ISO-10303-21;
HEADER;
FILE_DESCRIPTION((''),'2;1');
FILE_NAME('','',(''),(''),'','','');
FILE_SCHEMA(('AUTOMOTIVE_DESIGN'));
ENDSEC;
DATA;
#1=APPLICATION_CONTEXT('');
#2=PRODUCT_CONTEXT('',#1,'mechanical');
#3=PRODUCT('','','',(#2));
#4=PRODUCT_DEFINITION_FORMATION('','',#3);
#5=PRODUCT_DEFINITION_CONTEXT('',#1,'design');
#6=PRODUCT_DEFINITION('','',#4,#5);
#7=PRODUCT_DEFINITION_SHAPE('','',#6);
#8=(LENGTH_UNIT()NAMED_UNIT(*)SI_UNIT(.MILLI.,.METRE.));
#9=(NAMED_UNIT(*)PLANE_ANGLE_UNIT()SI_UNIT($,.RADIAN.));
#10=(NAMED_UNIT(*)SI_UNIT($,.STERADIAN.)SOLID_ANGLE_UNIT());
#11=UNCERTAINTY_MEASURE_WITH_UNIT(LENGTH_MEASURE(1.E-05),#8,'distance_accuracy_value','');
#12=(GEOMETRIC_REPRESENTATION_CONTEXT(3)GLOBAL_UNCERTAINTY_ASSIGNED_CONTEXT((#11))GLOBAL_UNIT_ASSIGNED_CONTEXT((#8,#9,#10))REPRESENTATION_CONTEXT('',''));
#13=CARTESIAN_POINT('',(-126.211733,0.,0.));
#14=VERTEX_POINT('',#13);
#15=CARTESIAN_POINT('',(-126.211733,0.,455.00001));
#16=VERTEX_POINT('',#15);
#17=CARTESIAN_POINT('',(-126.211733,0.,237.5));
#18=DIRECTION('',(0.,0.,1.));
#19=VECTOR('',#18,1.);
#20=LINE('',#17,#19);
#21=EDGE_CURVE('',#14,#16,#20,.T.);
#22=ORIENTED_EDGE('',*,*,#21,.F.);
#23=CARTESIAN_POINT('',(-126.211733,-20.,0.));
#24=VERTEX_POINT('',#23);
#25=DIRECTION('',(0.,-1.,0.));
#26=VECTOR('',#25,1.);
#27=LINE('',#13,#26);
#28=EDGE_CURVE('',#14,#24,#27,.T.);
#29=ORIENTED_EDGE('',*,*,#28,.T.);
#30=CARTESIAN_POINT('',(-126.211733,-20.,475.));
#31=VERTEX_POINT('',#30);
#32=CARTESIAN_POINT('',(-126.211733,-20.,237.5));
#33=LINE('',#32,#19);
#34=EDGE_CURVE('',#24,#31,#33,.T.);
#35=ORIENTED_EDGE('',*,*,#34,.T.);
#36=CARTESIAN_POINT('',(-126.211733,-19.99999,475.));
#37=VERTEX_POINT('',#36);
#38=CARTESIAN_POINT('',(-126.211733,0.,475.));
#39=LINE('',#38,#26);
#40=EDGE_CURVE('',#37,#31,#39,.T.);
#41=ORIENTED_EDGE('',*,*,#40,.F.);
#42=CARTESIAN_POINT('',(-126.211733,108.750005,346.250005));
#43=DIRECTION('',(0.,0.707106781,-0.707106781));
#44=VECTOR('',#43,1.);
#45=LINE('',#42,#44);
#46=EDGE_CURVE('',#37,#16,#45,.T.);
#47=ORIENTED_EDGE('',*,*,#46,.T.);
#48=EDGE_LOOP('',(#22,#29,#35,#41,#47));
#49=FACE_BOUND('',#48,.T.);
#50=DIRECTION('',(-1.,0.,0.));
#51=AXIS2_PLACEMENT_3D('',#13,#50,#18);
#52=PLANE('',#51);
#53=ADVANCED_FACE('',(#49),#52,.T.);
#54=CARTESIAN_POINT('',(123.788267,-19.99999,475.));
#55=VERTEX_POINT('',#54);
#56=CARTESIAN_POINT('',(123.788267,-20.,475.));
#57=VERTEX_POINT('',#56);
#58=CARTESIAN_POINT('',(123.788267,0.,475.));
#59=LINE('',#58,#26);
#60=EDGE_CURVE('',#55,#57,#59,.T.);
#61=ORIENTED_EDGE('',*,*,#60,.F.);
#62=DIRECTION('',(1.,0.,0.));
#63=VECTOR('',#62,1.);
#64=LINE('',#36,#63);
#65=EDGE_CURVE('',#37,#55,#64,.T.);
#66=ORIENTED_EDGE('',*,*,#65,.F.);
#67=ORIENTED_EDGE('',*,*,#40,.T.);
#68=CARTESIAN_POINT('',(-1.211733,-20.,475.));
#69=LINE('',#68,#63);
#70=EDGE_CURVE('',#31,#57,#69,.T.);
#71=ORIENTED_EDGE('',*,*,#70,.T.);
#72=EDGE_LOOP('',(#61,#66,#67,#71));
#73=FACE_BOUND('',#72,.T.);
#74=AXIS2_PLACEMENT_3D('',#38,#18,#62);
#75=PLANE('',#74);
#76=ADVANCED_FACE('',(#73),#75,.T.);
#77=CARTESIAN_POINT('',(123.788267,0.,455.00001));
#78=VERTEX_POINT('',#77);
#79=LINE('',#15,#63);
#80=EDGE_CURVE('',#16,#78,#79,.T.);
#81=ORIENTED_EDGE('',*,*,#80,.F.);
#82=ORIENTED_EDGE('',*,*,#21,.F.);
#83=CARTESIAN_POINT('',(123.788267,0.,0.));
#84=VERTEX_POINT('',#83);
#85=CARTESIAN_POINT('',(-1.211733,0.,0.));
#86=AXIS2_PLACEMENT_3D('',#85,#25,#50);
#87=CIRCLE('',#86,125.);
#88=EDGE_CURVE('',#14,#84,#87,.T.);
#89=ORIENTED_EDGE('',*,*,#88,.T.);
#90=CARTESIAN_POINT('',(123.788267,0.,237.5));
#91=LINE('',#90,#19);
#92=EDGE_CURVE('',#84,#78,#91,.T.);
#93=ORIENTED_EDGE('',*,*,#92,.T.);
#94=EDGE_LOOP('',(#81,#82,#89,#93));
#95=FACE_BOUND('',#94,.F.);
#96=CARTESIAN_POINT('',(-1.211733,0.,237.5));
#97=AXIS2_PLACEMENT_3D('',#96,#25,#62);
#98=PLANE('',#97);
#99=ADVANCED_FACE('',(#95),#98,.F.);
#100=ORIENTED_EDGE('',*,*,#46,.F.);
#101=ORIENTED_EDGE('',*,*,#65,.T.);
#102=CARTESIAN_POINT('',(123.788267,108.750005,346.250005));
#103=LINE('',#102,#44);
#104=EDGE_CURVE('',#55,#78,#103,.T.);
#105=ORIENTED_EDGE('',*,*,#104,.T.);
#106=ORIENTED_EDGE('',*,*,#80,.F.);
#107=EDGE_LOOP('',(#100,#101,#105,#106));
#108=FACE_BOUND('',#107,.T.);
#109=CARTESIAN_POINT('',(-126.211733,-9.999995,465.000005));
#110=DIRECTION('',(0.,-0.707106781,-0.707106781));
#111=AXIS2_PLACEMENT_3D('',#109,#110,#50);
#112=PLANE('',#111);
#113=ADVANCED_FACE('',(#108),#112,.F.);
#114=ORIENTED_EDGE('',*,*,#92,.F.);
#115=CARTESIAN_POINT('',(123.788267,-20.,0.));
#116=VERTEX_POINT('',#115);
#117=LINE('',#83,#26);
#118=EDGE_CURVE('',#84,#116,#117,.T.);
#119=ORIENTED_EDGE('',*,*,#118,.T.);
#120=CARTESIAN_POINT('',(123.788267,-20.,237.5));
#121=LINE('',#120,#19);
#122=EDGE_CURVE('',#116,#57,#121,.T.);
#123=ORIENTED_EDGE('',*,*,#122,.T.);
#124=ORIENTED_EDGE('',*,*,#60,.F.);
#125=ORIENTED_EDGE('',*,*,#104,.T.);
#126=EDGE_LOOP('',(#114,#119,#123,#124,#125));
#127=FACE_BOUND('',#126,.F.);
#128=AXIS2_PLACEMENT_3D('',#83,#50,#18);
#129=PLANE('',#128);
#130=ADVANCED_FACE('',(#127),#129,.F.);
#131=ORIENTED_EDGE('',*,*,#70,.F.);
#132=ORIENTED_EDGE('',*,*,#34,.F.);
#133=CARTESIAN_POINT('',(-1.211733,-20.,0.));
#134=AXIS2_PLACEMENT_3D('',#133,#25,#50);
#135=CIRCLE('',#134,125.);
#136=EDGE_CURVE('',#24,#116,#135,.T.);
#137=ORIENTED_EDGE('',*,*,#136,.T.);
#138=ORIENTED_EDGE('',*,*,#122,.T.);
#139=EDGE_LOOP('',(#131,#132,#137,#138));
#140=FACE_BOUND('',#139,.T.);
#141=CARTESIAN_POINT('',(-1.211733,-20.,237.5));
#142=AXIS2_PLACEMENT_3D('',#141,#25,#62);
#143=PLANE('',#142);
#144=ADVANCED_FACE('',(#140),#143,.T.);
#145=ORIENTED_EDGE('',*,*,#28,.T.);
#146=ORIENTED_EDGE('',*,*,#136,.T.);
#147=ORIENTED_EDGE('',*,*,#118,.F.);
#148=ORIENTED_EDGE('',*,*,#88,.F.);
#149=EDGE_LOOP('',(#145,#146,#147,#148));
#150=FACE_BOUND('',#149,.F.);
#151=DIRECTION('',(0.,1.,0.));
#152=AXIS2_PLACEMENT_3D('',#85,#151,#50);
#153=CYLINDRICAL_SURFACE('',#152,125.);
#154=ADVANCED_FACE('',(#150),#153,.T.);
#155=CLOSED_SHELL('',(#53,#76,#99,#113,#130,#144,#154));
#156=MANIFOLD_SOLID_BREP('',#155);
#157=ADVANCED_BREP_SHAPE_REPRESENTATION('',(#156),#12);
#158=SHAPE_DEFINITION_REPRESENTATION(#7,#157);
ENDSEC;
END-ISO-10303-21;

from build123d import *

# Parameters (mm, degrees)
F1_DEPTH = 20
F0_W     = 250
F0_H     = 475
F2_DEPTH = 20
F3_SIZE  = 19.99999


# Not quite as in the source:
# - a fillet or chamfer is up to 0.001 mm smaller than in the source, because OpenCascade refuses the exact size


with BuildPart() as f1:
    # F0 (on Front) → F1 (new body)
    with BuildSketch(Plane.XZ):
        with BuildLine():
            Line((123.788267374, 0), (-126.211732626, 0))
            ThreePointArc((-126.211732626, 0), (-1.211732626, -125), (123.788267374, 0))
        make_face()
    extrude(amount=F1_DEPTH)

    # F0 (on Front) → F2 (join)
    with BuildSketch(Plane.XZ):
        with Locations((-1.211732626, 237.5)):
            Rectangle(F0_W, F0_H)
    extrude(amount=F2_DEPTH)

    # F3 (size 20 in the source; OpenCascade refuses exactly that, so slightly less here)
    f3_edges = [f1.edges().sort_by_distance(p)[0] for p in [
        (-1.211733, 0, 475),
    ]]
    chamfer(f3_edges, length=F3_SIZE)


solid = f1.part
